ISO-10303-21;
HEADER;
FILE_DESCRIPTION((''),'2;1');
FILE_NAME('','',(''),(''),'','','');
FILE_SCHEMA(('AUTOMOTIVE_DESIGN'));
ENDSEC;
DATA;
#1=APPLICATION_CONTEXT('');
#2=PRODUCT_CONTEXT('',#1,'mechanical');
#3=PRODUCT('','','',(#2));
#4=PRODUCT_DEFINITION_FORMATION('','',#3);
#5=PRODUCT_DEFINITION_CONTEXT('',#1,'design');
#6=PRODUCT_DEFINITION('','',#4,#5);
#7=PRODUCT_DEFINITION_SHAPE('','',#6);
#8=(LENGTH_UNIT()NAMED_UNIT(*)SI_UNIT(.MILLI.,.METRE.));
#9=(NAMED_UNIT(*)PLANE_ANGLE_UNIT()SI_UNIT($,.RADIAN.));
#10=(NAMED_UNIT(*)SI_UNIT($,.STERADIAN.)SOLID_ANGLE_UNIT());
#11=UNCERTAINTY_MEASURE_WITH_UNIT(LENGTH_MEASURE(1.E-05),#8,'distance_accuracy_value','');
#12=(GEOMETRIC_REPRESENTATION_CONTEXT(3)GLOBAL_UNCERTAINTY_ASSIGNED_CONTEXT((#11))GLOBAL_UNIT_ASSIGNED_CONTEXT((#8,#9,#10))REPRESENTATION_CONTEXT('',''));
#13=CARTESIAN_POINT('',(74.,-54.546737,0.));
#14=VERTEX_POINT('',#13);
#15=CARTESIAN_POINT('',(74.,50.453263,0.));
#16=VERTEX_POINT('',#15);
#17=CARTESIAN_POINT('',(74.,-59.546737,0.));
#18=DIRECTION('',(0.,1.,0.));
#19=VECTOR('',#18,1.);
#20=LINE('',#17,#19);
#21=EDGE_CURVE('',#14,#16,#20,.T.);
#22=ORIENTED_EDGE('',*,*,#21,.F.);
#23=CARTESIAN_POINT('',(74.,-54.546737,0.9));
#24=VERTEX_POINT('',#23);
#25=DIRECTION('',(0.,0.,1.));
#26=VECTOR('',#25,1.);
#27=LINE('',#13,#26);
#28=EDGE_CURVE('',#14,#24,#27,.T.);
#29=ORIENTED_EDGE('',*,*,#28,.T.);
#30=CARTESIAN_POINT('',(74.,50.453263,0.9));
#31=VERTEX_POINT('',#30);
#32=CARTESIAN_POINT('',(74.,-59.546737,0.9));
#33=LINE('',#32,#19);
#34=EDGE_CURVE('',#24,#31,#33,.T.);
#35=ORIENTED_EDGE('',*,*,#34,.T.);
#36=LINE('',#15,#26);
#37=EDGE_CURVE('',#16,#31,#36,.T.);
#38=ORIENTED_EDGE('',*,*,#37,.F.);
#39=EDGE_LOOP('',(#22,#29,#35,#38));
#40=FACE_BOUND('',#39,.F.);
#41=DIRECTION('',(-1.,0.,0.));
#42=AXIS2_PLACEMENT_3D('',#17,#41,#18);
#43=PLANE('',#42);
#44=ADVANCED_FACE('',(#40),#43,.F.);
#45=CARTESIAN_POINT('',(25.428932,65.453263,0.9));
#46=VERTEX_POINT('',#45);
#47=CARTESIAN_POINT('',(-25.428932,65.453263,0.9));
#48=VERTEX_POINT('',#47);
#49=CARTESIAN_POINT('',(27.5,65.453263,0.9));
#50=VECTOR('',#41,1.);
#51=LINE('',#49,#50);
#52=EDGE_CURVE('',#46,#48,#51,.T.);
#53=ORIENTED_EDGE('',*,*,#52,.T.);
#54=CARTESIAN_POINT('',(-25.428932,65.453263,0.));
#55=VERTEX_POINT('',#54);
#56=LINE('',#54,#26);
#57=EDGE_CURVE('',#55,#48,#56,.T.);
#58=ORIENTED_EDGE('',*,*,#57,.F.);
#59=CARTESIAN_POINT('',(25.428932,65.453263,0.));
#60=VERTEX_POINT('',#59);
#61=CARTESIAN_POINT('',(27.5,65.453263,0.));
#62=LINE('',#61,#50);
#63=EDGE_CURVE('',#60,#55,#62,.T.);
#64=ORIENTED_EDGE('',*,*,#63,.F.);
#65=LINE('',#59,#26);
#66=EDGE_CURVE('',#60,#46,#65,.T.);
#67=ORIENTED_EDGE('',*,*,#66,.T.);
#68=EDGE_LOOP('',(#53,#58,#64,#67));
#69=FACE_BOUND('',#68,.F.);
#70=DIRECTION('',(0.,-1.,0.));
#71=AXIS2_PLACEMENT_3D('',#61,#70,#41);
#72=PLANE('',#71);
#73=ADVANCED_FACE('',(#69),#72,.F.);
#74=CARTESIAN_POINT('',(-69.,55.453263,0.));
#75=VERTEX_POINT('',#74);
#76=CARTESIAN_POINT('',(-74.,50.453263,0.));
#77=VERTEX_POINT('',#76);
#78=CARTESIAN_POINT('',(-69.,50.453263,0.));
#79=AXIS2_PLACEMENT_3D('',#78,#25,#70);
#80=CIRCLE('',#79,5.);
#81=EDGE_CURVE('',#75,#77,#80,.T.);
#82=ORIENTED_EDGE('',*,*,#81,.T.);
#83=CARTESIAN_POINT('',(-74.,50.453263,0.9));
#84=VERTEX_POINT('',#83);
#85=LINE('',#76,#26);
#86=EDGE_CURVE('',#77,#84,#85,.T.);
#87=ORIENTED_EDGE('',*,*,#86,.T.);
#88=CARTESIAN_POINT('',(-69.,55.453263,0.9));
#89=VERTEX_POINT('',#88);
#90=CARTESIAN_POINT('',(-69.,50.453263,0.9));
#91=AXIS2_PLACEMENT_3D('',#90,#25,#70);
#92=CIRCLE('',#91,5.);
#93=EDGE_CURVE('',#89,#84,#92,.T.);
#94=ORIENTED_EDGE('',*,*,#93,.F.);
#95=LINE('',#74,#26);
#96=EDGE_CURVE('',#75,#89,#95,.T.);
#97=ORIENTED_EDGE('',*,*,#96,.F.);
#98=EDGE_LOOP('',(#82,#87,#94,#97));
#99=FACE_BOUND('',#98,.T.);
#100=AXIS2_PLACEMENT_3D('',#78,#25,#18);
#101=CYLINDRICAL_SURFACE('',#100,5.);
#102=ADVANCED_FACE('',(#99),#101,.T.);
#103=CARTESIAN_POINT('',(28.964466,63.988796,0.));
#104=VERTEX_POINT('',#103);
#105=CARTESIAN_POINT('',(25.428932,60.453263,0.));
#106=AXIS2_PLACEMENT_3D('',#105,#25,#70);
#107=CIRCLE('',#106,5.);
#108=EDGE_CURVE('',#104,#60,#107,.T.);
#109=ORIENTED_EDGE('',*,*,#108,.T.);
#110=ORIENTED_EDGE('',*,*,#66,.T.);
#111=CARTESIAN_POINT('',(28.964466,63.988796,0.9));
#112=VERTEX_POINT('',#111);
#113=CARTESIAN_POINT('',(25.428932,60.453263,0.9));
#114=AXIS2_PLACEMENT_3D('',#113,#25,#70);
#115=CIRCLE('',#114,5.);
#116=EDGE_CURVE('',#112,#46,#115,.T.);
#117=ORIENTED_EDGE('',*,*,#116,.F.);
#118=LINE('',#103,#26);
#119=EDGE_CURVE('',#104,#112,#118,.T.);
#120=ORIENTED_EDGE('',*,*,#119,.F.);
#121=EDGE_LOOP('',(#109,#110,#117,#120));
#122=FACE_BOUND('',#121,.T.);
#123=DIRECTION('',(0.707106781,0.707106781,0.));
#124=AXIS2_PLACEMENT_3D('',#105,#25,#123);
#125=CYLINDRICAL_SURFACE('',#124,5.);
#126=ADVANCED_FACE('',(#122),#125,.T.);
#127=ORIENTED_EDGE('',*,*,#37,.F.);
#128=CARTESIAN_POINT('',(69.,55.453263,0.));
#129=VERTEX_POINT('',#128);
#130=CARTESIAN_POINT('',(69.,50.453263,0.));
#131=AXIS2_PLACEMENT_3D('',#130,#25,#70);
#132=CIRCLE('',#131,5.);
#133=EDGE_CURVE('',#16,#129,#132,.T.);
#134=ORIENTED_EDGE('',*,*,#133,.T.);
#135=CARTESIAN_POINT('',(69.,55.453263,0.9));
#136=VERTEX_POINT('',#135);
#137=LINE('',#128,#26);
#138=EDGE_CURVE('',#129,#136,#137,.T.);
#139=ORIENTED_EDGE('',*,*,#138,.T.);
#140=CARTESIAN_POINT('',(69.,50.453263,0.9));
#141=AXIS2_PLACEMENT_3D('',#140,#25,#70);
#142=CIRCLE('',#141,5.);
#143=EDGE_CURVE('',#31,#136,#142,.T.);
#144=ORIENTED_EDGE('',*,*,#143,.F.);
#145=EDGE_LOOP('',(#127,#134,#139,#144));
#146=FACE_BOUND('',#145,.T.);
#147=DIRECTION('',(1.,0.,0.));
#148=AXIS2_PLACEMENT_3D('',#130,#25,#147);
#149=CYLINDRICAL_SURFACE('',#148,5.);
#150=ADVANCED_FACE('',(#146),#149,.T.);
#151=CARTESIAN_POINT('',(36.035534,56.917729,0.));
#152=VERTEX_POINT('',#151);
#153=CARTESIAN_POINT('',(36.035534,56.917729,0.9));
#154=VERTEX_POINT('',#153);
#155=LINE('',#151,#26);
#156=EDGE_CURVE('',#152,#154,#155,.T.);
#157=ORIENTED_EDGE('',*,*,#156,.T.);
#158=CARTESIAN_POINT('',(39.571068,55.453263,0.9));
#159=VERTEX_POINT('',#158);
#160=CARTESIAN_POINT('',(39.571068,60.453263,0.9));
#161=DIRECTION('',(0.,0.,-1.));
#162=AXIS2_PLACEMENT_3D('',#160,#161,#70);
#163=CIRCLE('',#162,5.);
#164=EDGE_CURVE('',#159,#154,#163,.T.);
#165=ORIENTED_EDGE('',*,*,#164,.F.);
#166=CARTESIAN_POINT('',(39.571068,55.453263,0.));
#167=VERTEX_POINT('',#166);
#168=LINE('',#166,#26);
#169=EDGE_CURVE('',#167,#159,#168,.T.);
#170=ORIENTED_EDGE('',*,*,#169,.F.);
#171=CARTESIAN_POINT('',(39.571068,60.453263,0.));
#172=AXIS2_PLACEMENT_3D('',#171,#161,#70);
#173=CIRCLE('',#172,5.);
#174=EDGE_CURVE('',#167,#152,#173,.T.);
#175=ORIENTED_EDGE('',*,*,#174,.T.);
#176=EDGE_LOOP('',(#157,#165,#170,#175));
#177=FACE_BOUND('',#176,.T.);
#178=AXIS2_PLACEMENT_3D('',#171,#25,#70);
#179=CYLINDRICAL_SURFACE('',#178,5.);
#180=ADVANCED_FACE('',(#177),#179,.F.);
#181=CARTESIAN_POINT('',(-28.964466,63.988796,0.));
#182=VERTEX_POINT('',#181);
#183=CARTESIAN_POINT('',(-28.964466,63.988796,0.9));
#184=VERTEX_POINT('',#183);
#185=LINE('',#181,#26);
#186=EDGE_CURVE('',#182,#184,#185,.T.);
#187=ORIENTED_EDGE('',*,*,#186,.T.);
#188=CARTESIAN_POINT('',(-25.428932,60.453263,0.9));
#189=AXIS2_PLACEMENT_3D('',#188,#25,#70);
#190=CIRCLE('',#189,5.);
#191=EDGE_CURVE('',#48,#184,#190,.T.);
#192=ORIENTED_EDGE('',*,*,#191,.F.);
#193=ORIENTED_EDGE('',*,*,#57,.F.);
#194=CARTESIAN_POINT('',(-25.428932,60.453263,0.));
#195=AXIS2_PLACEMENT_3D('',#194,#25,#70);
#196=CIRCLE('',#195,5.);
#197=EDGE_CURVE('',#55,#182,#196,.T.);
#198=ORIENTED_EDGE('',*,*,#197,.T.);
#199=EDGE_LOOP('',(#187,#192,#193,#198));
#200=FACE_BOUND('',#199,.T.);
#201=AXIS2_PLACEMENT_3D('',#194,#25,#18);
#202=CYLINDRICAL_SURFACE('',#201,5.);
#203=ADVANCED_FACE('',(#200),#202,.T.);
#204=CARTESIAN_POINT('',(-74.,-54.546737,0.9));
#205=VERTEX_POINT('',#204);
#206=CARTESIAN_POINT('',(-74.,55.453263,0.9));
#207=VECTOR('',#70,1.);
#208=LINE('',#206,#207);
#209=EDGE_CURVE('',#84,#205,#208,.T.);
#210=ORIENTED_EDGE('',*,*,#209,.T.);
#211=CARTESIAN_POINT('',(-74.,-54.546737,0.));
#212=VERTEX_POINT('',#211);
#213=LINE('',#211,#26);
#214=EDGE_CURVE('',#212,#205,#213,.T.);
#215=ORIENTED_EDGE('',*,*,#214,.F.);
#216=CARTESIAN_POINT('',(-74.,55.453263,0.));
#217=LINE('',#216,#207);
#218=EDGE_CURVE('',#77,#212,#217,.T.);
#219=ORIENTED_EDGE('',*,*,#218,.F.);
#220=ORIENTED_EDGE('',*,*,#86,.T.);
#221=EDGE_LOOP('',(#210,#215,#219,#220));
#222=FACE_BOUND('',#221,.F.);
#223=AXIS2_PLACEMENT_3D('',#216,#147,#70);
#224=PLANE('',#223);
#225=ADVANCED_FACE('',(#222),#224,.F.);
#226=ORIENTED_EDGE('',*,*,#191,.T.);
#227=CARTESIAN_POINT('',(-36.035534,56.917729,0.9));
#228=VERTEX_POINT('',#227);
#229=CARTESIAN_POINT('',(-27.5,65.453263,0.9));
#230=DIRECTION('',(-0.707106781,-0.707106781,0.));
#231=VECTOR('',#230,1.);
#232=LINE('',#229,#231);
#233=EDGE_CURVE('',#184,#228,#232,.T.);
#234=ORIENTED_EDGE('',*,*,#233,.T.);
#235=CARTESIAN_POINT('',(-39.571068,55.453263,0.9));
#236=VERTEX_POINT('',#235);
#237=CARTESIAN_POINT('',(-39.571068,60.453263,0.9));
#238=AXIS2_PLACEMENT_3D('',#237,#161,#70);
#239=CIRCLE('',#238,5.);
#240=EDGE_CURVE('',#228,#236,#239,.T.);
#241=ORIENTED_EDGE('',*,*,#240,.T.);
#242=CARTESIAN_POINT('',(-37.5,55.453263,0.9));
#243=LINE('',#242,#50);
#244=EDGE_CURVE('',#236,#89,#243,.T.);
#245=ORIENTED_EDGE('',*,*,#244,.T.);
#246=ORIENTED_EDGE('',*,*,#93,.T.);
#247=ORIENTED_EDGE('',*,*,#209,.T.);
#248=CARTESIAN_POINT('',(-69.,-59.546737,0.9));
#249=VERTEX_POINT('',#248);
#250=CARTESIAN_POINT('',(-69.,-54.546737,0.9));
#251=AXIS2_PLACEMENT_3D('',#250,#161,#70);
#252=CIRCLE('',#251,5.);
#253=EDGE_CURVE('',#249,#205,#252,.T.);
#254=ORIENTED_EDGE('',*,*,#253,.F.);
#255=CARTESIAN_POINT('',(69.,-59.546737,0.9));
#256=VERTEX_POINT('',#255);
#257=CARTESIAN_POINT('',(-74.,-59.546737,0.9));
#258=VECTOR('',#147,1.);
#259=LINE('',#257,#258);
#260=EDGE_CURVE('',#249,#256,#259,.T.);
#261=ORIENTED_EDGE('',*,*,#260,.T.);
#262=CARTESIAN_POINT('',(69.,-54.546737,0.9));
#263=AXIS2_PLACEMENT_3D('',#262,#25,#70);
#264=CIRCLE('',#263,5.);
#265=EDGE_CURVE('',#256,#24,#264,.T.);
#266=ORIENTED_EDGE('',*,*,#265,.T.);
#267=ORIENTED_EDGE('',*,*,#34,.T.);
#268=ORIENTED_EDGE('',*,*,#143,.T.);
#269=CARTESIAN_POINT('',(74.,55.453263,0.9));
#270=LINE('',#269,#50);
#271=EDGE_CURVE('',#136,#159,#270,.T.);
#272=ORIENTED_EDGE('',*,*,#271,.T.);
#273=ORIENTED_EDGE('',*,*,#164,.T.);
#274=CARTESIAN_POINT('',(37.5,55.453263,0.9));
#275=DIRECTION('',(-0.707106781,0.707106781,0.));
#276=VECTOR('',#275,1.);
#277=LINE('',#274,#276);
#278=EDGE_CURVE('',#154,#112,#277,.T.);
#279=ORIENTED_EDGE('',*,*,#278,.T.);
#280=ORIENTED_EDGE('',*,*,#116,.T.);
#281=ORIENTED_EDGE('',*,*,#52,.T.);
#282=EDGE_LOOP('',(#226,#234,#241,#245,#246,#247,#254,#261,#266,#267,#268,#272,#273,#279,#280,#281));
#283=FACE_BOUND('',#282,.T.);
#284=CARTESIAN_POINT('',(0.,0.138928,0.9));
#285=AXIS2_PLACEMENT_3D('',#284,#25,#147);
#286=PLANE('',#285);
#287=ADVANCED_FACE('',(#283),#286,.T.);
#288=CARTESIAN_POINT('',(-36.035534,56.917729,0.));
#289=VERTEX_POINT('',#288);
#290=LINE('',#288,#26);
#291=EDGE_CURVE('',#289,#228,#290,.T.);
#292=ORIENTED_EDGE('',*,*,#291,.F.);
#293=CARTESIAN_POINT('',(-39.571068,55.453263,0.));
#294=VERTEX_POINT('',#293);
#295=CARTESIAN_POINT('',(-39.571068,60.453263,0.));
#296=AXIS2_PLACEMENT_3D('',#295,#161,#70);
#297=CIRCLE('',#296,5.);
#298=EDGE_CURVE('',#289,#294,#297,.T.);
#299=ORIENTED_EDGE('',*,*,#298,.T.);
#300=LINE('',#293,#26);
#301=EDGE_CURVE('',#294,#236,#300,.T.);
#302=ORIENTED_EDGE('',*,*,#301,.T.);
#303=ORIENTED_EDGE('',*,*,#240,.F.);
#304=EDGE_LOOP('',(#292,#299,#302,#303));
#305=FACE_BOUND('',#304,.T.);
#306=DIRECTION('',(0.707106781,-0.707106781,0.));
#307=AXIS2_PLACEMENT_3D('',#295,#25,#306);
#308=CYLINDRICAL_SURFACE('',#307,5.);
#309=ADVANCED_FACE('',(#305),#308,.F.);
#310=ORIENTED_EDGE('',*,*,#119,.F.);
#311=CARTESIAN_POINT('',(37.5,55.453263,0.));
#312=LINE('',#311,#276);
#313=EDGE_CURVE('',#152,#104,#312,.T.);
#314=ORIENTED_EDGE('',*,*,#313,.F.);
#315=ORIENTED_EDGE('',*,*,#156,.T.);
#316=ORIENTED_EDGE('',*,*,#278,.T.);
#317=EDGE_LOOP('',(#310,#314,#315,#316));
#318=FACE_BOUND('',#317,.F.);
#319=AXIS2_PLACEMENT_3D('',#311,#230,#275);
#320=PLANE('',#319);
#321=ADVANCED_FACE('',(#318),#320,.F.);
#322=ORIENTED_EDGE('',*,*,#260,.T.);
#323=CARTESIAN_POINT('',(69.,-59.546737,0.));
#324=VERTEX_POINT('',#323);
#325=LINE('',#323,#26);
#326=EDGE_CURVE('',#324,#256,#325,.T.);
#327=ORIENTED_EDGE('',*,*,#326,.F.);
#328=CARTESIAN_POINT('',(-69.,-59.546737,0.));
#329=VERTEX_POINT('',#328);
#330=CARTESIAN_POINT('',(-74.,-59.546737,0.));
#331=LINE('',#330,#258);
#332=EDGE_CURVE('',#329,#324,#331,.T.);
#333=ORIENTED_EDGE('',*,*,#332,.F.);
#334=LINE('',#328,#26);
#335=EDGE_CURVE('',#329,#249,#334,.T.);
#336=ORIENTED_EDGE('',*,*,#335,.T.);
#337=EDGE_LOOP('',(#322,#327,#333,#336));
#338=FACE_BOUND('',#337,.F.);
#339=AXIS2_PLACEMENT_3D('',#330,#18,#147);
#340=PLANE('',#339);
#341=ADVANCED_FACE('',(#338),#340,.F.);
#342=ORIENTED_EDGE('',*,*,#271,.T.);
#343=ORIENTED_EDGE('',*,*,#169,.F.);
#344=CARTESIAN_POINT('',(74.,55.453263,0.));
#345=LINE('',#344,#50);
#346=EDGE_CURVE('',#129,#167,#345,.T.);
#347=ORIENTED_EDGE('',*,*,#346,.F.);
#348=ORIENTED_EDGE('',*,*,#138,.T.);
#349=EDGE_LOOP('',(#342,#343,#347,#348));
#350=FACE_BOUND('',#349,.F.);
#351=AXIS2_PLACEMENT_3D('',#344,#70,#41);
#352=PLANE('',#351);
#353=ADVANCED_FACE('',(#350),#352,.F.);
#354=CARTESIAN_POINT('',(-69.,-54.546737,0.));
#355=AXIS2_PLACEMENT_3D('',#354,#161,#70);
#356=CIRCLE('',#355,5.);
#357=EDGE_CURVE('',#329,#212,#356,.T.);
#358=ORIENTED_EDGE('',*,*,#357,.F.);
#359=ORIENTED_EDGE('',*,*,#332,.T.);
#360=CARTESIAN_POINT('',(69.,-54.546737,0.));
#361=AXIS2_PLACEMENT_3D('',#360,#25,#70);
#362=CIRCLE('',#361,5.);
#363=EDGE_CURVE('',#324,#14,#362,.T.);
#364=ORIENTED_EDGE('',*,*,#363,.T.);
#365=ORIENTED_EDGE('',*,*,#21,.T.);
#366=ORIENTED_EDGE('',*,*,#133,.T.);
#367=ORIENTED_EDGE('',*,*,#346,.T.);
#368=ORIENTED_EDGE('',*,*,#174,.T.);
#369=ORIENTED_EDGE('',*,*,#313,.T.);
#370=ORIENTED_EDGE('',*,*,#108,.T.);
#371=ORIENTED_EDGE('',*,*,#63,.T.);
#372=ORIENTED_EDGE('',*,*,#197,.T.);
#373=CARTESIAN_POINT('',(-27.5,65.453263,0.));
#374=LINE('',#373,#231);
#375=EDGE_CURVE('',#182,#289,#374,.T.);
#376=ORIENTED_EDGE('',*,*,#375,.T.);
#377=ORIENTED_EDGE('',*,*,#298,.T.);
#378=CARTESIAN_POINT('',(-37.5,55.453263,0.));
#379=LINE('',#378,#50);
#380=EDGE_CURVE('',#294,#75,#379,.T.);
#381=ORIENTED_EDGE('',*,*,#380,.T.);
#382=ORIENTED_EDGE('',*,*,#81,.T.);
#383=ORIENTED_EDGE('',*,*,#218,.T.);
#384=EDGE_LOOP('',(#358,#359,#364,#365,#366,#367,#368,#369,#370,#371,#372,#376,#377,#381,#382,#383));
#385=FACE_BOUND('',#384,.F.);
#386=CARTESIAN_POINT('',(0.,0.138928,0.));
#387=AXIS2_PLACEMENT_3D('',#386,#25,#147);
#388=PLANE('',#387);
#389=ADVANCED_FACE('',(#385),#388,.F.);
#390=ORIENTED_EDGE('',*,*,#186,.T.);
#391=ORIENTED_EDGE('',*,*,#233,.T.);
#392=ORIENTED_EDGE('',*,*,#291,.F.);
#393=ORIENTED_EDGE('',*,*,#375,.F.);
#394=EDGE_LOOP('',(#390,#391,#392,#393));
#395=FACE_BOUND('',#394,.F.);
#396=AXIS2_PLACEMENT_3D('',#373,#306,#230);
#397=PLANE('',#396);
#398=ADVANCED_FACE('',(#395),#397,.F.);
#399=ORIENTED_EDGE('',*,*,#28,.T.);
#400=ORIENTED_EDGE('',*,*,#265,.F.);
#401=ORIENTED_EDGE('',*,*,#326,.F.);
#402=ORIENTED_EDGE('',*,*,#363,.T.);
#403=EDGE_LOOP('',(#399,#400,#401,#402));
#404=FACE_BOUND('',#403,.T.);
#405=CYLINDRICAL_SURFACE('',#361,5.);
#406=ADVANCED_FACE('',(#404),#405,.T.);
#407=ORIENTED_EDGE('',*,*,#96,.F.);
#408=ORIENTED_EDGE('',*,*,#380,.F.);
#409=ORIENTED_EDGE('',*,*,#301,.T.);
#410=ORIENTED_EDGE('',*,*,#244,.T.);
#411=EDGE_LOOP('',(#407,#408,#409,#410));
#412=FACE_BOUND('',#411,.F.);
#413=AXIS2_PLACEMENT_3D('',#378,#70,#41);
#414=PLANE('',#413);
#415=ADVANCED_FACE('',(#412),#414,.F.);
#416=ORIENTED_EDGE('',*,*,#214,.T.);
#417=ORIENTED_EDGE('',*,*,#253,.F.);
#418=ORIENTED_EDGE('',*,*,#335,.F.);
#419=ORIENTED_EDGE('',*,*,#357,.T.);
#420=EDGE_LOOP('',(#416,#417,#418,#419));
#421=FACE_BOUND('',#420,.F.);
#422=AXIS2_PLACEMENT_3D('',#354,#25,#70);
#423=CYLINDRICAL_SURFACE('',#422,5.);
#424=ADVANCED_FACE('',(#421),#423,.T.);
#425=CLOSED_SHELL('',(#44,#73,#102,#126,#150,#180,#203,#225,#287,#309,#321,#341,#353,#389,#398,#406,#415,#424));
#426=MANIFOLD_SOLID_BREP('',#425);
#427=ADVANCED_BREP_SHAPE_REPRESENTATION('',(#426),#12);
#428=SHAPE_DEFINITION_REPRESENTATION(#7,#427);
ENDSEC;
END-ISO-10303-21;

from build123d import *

# Parameters (mm, degrees)
F1_DEPTH = 0.9
F2_R     = 5


# Not quite as in the source:
# - a feature names something its author has since deleted; it is built from what else it names


with BuildPart() as f1:
    # F0 (on Top) → F1 (new body)
    with BuildSketch(Plane.XY):
        Polygon((-74, -59.5467374876), (74, -59.5467374876), (74, 55.4532625124), (37.5, 55.4532625124), (27.5, 65.4532625124), (-27.5, 65.4532625124), (-37.5, 55.4532625124), (-74, 55.4532625124), align=None)
    extrude(amount=F1_DEPTH)

    # F2
    f2_edges = [f1.edges().sort_by_distance(p)[0] for p in [
        (37.5, 55.453263, 0.45),
        (27.5, 65.453263, 0.45),
        (-37.5, 55.453263, 0.45),
        (-27.5, 65.453263, 0.45),
        (-74, 55.453263, 0.45),
        (-74, -59.546737, 0.45),
        (74, -59.546737, 0.45),
        (74, 55.453263, 0.45),
    ]]
    fillet(f2_edges, radius=F2_R)


solid = f1.part
